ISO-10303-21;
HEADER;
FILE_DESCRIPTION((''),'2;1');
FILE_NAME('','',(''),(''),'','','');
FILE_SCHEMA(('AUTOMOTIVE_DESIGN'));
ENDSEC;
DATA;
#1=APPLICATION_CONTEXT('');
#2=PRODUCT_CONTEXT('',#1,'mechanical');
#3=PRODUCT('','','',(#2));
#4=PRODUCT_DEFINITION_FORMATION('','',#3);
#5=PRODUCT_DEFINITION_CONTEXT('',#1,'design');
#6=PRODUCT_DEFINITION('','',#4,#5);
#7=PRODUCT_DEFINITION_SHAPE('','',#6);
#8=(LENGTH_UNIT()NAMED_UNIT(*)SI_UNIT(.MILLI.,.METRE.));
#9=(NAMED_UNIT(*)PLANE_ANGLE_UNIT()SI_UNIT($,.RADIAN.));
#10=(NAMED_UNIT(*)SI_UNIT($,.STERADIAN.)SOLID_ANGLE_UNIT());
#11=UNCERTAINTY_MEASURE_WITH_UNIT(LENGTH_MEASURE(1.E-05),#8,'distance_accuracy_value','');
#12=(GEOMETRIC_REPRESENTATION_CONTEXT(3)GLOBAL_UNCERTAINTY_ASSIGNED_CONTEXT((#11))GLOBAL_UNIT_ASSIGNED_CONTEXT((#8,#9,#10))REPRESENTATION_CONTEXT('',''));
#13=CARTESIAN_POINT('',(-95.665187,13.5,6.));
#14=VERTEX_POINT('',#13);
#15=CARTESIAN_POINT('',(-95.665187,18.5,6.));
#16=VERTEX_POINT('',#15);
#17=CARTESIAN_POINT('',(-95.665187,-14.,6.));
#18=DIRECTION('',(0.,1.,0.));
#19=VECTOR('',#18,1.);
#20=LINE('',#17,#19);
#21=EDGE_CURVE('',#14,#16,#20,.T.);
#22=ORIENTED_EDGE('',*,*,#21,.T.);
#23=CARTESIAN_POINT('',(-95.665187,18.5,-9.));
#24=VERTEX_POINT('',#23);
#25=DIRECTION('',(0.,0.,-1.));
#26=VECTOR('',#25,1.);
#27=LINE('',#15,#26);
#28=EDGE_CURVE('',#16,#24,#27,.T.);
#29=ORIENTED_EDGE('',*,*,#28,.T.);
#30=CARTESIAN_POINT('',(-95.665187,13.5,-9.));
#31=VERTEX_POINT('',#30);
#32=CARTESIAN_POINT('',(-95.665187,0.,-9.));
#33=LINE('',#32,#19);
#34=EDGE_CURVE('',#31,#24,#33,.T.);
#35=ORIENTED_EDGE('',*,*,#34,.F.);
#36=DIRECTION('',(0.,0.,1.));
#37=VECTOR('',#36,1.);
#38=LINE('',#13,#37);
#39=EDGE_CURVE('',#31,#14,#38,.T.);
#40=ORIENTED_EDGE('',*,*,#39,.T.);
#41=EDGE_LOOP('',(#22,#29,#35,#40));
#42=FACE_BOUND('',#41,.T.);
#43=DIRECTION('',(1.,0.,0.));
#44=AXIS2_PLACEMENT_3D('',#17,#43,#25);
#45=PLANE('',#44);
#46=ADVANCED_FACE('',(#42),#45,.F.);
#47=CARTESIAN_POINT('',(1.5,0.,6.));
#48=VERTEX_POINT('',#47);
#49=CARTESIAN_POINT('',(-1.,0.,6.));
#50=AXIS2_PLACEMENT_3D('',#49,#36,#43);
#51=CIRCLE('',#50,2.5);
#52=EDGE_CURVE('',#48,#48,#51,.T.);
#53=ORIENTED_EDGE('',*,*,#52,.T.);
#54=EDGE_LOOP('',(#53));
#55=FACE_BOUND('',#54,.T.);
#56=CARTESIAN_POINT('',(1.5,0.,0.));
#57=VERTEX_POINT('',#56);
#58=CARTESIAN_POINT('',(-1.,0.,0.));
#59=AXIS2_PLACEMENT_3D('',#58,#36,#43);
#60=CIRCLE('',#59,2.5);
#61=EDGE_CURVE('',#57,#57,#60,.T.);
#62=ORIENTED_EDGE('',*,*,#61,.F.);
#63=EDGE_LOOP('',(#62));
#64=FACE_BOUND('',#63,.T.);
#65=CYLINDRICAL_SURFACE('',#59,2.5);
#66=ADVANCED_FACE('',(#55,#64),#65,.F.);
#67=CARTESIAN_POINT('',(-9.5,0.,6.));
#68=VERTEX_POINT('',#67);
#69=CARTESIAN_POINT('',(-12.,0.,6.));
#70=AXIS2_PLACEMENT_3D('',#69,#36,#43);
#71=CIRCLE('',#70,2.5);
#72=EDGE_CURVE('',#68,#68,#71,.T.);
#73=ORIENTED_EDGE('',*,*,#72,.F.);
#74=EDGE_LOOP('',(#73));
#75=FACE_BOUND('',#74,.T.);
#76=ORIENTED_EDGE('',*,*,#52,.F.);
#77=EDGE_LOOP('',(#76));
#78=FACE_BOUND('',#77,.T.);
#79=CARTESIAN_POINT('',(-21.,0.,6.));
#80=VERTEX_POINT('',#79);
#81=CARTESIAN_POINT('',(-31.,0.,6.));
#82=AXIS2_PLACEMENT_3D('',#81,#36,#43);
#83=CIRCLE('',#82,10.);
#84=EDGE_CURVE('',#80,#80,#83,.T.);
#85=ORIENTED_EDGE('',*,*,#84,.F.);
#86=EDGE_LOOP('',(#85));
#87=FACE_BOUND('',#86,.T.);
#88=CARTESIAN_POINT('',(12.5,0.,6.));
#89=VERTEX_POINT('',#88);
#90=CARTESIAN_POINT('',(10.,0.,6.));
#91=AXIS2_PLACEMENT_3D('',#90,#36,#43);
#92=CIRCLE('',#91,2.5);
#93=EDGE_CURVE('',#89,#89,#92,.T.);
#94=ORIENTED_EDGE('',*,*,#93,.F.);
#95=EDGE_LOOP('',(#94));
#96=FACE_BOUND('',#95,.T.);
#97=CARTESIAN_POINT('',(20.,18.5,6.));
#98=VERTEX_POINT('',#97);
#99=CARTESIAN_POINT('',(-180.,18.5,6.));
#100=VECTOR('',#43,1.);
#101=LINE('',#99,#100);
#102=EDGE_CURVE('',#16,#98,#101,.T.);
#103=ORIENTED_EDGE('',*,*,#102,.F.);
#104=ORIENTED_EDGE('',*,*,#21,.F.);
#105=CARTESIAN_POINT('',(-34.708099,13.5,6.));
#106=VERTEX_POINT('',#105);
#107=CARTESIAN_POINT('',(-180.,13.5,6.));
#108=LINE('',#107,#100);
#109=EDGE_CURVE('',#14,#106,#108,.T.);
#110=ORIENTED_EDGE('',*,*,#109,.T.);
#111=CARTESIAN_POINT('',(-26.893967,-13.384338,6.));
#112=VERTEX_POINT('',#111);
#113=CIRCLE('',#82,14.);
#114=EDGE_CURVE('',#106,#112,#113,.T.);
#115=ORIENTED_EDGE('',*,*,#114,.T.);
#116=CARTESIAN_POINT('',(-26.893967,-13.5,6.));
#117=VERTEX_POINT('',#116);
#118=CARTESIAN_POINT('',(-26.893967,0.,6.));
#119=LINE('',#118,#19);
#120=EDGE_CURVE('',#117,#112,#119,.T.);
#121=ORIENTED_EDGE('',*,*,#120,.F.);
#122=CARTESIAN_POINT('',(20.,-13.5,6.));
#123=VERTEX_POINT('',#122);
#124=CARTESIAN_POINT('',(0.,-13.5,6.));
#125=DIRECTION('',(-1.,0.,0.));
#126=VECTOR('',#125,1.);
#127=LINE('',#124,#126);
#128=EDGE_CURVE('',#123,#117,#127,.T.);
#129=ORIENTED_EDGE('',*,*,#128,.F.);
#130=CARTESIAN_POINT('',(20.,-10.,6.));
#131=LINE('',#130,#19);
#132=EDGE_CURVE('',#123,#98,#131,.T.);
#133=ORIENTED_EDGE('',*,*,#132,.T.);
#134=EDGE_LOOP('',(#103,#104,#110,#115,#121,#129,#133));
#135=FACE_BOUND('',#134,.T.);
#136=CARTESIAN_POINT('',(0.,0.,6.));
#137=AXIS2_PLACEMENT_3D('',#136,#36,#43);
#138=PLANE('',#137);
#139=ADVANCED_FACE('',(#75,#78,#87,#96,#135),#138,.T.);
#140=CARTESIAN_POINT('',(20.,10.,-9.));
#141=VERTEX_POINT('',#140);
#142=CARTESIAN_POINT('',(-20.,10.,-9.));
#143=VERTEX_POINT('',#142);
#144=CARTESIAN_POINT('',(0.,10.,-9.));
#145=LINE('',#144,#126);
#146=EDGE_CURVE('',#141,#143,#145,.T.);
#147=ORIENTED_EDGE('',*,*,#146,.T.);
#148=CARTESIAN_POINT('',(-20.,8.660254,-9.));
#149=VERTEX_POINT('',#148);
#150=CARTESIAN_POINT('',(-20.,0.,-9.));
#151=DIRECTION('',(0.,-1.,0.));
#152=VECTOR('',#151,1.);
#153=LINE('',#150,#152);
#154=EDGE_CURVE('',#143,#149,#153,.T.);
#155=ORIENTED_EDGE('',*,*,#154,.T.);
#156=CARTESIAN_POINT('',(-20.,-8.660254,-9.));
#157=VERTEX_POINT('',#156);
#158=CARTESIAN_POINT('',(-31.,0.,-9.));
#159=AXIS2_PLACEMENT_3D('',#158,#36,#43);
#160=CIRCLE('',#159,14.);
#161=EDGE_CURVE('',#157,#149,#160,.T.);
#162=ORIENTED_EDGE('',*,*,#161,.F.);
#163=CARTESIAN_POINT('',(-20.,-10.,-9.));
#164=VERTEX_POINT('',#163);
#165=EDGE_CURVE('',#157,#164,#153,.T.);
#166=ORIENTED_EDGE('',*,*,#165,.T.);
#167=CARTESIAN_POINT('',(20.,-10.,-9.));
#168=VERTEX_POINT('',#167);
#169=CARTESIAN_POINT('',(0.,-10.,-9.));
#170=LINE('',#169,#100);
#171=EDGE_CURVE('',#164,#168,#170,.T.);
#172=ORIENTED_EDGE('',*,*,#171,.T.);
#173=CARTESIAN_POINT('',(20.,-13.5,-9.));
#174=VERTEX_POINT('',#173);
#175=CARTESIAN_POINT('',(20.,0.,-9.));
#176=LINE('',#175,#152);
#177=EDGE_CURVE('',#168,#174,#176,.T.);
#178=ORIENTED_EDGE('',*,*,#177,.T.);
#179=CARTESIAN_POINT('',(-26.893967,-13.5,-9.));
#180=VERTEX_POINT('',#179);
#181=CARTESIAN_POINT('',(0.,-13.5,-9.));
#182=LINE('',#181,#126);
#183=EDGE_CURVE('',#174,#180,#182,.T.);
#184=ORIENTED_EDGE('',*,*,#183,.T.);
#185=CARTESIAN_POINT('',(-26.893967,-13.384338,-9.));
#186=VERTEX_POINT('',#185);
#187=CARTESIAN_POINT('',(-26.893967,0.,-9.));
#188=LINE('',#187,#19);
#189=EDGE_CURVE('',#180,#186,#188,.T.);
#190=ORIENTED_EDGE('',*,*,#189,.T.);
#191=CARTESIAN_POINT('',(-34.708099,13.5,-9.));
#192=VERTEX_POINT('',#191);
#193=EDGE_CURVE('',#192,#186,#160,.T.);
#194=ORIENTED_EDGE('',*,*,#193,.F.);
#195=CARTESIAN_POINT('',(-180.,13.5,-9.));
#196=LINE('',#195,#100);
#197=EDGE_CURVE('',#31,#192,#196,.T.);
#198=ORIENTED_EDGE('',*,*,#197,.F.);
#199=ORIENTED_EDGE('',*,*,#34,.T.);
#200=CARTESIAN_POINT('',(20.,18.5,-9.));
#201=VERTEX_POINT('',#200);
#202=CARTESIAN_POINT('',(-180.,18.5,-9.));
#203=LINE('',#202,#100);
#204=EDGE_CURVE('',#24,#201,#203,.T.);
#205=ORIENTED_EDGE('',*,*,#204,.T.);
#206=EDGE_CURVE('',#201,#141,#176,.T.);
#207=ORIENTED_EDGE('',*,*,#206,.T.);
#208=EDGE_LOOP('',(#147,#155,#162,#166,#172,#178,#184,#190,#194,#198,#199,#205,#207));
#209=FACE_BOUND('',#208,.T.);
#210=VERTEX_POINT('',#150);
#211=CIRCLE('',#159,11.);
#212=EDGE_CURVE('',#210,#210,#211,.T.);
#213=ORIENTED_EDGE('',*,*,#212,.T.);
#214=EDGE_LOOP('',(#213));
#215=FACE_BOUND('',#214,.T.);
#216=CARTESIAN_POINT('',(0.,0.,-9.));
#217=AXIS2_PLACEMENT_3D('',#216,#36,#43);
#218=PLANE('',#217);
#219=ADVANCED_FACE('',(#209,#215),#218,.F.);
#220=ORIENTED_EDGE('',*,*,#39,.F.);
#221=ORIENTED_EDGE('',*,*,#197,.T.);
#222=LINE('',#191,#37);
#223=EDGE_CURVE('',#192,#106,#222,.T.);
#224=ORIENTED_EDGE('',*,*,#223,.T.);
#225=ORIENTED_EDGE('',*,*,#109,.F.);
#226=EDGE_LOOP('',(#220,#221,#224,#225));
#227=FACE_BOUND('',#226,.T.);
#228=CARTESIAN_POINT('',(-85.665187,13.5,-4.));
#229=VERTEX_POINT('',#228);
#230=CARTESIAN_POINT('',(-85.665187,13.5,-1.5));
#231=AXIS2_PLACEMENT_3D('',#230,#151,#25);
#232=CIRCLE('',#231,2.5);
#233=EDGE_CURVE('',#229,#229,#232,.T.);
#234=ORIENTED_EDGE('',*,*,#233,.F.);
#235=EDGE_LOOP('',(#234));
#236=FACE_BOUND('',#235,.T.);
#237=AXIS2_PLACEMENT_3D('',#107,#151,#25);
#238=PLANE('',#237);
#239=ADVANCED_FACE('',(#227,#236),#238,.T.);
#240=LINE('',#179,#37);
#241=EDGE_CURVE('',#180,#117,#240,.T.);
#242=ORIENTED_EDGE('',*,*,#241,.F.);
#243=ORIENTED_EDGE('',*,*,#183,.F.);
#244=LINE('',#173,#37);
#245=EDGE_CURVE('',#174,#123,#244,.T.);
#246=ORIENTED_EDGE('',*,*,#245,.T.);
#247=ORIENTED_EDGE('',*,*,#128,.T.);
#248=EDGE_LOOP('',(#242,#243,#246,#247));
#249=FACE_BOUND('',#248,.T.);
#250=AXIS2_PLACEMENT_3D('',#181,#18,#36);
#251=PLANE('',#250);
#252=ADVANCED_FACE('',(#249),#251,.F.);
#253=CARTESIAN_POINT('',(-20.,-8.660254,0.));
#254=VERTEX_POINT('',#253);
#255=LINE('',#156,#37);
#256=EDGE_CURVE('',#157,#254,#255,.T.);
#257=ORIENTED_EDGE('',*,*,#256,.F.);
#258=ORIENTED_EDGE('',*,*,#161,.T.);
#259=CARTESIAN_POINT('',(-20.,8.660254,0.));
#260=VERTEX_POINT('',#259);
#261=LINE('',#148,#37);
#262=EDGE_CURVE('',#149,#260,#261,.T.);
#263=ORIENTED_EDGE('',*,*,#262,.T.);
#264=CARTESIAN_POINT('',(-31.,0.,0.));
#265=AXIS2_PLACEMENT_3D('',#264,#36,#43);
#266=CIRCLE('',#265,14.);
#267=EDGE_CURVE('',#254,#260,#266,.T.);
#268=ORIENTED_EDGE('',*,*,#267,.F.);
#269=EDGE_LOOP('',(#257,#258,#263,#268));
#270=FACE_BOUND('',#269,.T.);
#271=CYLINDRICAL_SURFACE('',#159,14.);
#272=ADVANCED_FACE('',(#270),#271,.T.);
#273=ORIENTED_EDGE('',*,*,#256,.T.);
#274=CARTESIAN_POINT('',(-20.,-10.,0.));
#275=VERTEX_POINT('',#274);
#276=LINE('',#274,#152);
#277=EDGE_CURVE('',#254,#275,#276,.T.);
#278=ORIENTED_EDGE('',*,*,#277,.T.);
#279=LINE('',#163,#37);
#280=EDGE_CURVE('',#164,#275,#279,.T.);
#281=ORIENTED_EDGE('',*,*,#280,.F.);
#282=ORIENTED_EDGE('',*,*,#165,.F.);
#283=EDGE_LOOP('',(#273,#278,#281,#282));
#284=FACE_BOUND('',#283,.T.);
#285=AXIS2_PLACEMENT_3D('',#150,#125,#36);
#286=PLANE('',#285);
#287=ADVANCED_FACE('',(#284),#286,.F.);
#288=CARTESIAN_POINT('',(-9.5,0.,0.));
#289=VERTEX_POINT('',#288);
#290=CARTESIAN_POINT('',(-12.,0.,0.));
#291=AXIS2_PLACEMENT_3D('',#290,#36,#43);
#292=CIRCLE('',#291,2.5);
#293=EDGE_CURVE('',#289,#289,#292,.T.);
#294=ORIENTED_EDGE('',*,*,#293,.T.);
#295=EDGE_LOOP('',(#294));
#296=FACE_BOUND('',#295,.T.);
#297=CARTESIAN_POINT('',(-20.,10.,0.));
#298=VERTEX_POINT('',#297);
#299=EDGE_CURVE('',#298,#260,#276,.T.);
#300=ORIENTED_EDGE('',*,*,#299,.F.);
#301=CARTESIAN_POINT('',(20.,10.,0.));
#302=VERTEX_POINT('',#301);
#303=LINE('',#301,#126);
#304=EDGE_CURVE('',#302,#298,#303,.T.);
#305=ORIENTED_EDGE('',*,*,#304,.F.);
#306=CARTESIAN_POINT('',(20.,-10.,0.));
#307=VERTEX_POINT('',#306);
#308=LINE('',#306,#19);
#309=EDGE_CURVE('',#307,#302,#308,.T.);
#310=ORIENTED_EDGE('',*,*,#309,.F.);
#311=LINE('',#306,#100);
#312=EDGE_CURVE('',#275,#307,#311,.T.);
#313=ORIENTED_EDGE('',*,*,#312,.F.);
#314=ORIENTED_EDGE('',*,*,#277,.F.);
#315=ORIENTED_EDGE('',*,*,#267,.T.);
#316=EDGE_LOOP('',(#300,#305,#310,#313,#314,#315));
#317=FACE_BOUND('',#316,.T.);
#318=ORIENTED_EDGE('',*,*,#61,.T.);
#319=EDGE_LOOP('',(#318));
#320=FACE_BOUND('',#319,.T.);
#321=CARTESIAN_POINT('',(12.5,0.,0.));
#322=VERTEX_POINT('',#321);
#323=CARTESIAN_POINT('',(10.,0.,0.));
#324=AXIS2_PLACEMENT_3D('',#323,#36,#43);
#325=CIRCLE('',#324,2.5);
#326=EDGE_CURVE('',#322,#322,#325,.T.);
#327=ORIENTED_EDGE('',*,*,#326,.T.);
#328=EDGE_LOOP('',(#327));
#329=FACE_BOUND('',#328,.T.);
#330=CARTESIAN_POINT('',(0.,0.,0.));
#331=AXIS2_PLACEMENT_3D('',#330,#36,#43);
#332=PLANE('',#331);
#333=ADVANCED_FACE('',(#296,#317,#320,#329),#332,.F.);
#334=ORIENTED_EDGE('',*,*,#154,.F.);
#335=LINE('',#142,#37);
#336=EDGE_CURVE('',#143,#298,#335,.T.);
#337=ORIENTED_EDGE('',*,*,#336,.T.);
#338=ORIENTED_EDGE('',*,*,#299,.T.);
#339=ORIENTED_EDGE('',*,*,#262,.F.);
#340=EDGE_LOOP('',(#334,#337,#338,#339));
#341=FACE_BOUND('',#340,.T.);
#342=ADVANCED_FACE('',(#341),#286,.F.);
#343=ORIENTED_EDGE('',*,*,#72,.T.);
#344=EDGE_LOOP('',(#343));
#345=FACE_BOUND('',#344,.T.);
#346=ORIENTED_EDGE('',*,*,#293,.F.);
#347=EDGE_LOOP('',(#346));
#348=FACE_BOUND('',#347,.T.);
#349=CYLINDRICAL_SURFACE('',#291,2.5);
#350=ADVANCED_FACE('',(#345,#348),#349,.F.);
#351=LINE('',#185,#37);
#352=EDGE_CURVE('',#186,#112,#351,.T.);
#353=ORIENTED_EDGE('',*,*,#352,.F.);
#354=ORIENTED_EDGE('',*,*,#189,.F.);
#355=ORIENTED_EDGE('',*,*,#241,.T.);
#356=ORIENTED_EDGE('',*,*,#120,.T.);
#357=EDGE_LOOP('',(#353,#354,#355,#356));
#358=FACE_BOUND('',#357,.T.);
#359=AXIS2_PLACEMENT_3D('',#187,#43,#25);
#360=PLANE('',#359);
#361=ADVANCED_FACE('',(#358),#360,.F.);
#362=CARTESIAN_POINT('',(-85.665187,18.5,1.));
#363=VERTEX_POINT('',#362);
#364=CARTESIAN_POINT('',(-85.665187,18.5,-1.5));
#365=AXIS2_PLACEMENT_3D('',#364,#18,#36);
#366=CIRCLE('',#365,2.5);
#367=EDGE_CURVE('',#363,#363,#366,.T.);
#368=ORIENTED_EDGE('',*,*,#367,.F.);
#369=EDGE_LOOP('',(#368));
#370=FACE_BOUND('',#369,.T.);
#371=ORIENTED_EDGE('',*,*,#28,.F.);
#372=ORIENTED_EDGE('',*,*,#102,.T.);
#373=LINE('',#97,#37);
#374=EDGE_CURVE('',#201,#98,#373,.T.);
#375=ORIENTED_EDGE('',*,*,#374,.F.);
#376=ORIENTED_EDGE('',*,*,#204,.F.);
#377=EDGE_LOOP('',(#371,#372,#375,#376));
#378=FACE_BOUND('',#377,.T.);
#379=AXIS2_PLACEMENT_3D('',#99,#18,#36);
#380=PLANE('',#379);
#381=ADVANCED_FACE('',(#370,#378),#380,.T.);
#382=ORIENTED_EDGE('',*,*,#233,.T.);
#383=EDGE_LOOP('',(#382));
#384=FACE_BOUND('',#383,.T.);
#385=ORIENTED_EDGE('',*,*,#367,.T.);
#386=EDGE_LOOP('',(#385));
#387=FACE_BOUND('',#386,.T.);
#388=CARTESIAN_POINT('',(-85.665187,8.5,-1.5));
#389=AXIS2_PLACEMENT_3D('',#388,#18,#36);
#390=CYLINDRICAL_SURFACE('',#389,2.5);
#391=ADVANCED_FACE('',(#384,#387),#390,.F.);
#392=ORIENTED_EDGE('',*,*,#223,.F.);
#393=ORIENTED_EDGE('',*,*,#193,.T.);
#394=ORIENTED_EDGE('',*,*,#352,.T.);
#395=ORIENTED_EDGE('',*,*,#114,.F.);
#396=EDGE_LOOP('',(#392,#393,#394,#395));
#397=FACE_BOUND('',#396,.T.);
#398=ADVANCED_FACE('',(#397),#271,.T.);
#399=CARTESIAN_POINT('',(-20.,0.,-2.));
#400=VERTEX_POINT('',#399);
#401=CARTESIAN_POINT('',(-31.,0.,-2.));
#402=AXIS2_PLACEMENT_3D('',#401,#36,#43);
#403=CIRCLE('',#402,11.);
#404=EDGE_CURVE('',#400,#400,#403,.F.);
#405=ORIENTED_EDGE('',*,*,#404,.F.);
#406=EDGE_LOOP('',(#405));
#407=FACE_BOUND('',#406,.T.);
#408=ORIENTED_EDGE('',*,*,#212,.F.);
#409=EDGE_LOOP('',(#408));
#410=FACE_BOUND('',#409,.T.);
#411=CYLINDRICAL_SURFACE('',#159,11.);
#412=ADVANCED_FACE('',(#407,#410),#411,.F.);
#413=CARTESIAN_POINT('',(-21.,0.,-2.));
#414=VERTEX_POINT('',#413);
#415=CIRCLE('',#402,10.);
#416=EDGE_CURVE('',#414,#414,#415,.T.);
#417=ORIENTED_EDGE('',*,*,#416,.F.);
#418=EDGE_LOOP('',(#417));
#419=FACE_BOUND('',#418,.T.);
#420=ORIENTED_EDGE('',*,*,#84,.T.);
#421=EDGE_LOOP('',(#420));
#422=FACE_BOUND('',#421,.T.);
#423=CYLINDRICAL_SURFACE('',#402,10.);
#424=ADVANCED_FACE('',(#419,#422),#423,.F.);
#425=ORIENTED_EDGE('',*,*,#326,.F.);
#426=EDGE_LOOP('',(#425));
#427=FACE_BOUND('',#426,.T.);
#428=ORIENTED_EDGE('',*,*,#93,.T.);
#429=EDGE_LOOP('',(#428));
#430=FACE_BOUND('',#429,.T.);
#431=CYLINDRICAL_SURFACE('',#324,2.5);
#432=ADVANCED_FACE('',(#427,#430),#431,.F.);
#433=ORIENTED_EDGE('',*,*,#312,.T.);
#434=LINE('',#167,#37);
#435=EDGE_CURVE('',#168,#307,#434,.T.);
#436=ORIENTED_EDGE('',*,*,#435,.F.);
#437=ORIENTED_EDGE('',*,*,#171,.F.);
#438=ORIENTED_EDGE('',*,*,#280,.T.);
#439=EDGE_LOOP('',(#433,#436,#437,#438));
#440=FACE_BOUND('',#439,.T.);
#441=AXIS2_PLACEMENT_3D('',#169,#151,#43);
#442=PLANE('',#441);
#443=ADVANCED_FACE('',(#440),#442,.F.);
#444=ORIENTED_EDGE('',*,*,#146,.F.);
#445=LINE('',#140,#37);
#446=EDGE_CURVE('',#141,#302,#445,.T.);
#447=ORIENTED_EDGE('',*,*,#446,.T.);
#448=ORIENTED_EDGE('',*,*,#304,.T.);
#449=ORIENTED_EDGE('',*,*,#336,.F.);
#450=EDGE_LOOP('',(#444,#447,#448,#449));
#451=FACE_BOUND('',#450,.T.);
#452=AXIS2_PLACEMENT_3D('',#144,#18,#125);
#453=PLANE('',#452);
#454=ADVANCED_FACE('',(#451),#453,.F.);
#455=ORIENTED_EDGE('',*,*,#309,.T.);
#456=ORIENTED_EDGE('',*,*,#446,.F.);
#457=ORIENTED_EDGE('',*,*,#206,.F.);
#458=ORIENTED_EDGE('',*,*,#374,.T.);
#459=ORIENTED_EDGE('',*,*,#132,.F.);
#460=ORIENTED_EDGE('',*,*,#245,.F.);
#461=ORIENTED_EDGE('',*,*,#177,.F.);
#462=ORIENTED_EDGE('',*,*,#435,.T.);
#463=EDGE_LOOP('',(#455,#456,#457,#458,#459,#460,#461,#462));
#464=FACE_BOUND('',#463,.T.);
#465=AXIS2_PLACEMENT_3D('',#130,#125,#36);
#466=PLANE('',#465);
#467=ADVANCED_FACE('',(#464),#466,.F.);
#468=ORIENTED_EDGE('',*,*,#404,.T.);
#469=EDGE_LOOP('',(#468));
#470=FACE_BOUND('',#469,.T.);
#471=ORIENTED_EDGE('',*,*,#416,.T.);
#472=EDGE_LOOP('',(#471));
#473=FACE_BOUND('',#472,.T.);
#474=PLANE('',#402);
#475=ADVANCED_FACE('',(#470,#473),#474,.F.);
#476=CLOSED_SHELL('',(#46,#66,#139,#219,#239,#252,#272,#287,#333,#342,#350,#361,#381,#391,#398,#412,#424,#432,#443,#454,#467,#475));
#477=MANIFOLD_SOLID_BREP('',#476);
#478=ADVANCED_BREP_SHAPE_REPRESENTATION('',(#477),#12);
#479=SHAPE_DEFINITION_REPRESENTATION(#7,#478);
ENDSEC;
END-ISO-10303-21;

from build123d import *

# Parameters (mm, degrees)
SKETCH_1_W          = 40
SKETCH_1_H          = 20
EXTRUDE_1_DEPTH     = 6
SKETCH_2_R          = 2.5
CUT_EXTRUDE_1_DEPTH = 24.151673806
EXTRUDE_START       = -15
EXTRUDE_2_OUTLINE_R = 11
EXTRUDE_2_DEPTH     = 15
EXTRUDE_START_2     = -8
SKETCH_5_R          = 11
SKETCH_5_R_2        = 10
EXTRUDE_3_DEPTH     = 8
SKETCH_8_W          = 15
SKETCH_8_H          = 5
EXTRUDE_4_DEPTH     = 200
SKETCH_9_W          = 4.403653586
SKETCH_9_H          = 3.736433346
EXTRUDE_5_DEPTH     = 15
SKETCH_13_W         = 87.445921981
SKETCH_13_H         = 18.524474632
CUT_EXTRUDE_2_DEPTH = 184.131783151
SKETCH_14_R         = 2.5
CUT_EXTRUDE_3_DEPTH = 10


# Read off the part's stored shape, not the designer's step: 凸台-拉伸2
with BuildPart() as part:
    # 草图1 → 凸台-拉伸1 (new body)
    with BuildSketch(Plane.XY):
        Rectangle(SKETCH_1_W, SKETCH_1_H)
    extrude(amount=EXTRUDE_1_DEPTH)

    # 草图2 → 切除-拉伸1 (cut, through all)
    with BuildSketch(Plane.XY.offset(6)):
        with Locations((10, 0)):
            Circle(SKETCH_2_R)
        with Locations((-1, 0)):
            Circle(SKETCH_2_R)
        with Locations((-12, 0)):
            Circle(SKETCH_2_R)
    extrude(amount=-CUT_EXTRUDE_1_DEPTH, mode=Mode.SUBTRACT)

    # 凸台-拉伸2 outline → 凸台-拉伸2 (add)
    with BuildSketch(Plane.XY.offset(6).offset(EXTRUDE_START)):
        with BuildLine():
            Line((20, 10), (20, 13.5))
            Line((20, 13.5), (-26.893967141, 13.5))
            Line((-26.893967141, 13.5), (-26.893967141, 13.384337644))
            ThreePointArc((-26.893967141, 13.384337644), (-45, 0), (-26.893967141, -13.384337644))
            Line((-26.893967141, -13.384337644), (-26.893967141, -13.5))
            Line((-26.893967141, -13.5), (20, -13.5))
            Line((20, -13.5), (20, -10))
            Line((20, -10), (-20, -10))
            Line((-20, -10), (-20, -8.660254038))
            ThreePointArc((-20, -8.660254038), (-17, 0), (-20, 8.660254038))
            Line((-20, 8.660254038), (-20, 10))
            Line((-20, 10), (20, 10))
        make_face()
        with Locations((-31, 0)):
            Circle(EXTRUDE_2_OUTLINE_R, mode=Mode.SUBTRACT)
    extrude(amount=EXTRUDE_2_DEPTH)

    # 草图5 → 凸台-拉伸3 (add)
    with BuildSketch(Plane.XY.offset(6).offset(EXTRUDE_START_2)):
        with Locations((-31, 0)):
            Circle(SKETCH_5_R)
        with Locations((-31, 0)):
            Circle(SKETCH_5_R_2, mode=Mode.SUBTRACT)
    extrude(amount=EXTRUDE_3_DEPTH)

    # 草图8 → 凸台-拉伸4 (add)
    with BuildSketch(Plane(origin=(20, 0, 0), x_dir=(0, 0, -1), z_dir=(1, 0, 0))):
        with Locations((1.5, 16)):
            Rectangle(SKETCH_8_W, SKETCH_8_H)
    extrude(amount=-EXTRUDE_4_DEPTH)

    # 草图9 → 凸台-拉伸5 (add, through all)
    with BuildSketch(Plane.XY.offset(6)):
        with Locations((-27.364497847, 13.796597935)):
            Rectangle(SKETCH_9_W, SKETCH_9_H)
    extrude(amount=-EXTRUDE_5_DEPTH)

    # 草图13 → 切除-拉伸2 (cut, through all)
    with BuildSketch(Plane(origin=(0, 18.5, 0), x_dir=(1, 0, 0), z_dir=(0, 1, 0))):
        with Locations((-139.388148112, 3.262237316)):
            Rectangle(SKETCH_13_W, SKETCH_13_H)
    extrude(amount=-CUT_EXTRUDE_2_DEPTH, mode=Mode.SUBTRACT)

    # 草图14 → 切除-拉伸3 (cut)
    with BuildSketch(Plane(origin=(0, 18.5, 0), x_dir=(1, 0, 0), z_dir=(0, 1, 0))):
        with Locations(Location((-85.665187121, 1.5, 0), (0, 0, 270))):
            Circle(SKETCH_14_R)
    extrude(amount=-CUT_EXTRUDE_3_DEPTH, mode=Mode.SUBTRACT)


solid = part.part
